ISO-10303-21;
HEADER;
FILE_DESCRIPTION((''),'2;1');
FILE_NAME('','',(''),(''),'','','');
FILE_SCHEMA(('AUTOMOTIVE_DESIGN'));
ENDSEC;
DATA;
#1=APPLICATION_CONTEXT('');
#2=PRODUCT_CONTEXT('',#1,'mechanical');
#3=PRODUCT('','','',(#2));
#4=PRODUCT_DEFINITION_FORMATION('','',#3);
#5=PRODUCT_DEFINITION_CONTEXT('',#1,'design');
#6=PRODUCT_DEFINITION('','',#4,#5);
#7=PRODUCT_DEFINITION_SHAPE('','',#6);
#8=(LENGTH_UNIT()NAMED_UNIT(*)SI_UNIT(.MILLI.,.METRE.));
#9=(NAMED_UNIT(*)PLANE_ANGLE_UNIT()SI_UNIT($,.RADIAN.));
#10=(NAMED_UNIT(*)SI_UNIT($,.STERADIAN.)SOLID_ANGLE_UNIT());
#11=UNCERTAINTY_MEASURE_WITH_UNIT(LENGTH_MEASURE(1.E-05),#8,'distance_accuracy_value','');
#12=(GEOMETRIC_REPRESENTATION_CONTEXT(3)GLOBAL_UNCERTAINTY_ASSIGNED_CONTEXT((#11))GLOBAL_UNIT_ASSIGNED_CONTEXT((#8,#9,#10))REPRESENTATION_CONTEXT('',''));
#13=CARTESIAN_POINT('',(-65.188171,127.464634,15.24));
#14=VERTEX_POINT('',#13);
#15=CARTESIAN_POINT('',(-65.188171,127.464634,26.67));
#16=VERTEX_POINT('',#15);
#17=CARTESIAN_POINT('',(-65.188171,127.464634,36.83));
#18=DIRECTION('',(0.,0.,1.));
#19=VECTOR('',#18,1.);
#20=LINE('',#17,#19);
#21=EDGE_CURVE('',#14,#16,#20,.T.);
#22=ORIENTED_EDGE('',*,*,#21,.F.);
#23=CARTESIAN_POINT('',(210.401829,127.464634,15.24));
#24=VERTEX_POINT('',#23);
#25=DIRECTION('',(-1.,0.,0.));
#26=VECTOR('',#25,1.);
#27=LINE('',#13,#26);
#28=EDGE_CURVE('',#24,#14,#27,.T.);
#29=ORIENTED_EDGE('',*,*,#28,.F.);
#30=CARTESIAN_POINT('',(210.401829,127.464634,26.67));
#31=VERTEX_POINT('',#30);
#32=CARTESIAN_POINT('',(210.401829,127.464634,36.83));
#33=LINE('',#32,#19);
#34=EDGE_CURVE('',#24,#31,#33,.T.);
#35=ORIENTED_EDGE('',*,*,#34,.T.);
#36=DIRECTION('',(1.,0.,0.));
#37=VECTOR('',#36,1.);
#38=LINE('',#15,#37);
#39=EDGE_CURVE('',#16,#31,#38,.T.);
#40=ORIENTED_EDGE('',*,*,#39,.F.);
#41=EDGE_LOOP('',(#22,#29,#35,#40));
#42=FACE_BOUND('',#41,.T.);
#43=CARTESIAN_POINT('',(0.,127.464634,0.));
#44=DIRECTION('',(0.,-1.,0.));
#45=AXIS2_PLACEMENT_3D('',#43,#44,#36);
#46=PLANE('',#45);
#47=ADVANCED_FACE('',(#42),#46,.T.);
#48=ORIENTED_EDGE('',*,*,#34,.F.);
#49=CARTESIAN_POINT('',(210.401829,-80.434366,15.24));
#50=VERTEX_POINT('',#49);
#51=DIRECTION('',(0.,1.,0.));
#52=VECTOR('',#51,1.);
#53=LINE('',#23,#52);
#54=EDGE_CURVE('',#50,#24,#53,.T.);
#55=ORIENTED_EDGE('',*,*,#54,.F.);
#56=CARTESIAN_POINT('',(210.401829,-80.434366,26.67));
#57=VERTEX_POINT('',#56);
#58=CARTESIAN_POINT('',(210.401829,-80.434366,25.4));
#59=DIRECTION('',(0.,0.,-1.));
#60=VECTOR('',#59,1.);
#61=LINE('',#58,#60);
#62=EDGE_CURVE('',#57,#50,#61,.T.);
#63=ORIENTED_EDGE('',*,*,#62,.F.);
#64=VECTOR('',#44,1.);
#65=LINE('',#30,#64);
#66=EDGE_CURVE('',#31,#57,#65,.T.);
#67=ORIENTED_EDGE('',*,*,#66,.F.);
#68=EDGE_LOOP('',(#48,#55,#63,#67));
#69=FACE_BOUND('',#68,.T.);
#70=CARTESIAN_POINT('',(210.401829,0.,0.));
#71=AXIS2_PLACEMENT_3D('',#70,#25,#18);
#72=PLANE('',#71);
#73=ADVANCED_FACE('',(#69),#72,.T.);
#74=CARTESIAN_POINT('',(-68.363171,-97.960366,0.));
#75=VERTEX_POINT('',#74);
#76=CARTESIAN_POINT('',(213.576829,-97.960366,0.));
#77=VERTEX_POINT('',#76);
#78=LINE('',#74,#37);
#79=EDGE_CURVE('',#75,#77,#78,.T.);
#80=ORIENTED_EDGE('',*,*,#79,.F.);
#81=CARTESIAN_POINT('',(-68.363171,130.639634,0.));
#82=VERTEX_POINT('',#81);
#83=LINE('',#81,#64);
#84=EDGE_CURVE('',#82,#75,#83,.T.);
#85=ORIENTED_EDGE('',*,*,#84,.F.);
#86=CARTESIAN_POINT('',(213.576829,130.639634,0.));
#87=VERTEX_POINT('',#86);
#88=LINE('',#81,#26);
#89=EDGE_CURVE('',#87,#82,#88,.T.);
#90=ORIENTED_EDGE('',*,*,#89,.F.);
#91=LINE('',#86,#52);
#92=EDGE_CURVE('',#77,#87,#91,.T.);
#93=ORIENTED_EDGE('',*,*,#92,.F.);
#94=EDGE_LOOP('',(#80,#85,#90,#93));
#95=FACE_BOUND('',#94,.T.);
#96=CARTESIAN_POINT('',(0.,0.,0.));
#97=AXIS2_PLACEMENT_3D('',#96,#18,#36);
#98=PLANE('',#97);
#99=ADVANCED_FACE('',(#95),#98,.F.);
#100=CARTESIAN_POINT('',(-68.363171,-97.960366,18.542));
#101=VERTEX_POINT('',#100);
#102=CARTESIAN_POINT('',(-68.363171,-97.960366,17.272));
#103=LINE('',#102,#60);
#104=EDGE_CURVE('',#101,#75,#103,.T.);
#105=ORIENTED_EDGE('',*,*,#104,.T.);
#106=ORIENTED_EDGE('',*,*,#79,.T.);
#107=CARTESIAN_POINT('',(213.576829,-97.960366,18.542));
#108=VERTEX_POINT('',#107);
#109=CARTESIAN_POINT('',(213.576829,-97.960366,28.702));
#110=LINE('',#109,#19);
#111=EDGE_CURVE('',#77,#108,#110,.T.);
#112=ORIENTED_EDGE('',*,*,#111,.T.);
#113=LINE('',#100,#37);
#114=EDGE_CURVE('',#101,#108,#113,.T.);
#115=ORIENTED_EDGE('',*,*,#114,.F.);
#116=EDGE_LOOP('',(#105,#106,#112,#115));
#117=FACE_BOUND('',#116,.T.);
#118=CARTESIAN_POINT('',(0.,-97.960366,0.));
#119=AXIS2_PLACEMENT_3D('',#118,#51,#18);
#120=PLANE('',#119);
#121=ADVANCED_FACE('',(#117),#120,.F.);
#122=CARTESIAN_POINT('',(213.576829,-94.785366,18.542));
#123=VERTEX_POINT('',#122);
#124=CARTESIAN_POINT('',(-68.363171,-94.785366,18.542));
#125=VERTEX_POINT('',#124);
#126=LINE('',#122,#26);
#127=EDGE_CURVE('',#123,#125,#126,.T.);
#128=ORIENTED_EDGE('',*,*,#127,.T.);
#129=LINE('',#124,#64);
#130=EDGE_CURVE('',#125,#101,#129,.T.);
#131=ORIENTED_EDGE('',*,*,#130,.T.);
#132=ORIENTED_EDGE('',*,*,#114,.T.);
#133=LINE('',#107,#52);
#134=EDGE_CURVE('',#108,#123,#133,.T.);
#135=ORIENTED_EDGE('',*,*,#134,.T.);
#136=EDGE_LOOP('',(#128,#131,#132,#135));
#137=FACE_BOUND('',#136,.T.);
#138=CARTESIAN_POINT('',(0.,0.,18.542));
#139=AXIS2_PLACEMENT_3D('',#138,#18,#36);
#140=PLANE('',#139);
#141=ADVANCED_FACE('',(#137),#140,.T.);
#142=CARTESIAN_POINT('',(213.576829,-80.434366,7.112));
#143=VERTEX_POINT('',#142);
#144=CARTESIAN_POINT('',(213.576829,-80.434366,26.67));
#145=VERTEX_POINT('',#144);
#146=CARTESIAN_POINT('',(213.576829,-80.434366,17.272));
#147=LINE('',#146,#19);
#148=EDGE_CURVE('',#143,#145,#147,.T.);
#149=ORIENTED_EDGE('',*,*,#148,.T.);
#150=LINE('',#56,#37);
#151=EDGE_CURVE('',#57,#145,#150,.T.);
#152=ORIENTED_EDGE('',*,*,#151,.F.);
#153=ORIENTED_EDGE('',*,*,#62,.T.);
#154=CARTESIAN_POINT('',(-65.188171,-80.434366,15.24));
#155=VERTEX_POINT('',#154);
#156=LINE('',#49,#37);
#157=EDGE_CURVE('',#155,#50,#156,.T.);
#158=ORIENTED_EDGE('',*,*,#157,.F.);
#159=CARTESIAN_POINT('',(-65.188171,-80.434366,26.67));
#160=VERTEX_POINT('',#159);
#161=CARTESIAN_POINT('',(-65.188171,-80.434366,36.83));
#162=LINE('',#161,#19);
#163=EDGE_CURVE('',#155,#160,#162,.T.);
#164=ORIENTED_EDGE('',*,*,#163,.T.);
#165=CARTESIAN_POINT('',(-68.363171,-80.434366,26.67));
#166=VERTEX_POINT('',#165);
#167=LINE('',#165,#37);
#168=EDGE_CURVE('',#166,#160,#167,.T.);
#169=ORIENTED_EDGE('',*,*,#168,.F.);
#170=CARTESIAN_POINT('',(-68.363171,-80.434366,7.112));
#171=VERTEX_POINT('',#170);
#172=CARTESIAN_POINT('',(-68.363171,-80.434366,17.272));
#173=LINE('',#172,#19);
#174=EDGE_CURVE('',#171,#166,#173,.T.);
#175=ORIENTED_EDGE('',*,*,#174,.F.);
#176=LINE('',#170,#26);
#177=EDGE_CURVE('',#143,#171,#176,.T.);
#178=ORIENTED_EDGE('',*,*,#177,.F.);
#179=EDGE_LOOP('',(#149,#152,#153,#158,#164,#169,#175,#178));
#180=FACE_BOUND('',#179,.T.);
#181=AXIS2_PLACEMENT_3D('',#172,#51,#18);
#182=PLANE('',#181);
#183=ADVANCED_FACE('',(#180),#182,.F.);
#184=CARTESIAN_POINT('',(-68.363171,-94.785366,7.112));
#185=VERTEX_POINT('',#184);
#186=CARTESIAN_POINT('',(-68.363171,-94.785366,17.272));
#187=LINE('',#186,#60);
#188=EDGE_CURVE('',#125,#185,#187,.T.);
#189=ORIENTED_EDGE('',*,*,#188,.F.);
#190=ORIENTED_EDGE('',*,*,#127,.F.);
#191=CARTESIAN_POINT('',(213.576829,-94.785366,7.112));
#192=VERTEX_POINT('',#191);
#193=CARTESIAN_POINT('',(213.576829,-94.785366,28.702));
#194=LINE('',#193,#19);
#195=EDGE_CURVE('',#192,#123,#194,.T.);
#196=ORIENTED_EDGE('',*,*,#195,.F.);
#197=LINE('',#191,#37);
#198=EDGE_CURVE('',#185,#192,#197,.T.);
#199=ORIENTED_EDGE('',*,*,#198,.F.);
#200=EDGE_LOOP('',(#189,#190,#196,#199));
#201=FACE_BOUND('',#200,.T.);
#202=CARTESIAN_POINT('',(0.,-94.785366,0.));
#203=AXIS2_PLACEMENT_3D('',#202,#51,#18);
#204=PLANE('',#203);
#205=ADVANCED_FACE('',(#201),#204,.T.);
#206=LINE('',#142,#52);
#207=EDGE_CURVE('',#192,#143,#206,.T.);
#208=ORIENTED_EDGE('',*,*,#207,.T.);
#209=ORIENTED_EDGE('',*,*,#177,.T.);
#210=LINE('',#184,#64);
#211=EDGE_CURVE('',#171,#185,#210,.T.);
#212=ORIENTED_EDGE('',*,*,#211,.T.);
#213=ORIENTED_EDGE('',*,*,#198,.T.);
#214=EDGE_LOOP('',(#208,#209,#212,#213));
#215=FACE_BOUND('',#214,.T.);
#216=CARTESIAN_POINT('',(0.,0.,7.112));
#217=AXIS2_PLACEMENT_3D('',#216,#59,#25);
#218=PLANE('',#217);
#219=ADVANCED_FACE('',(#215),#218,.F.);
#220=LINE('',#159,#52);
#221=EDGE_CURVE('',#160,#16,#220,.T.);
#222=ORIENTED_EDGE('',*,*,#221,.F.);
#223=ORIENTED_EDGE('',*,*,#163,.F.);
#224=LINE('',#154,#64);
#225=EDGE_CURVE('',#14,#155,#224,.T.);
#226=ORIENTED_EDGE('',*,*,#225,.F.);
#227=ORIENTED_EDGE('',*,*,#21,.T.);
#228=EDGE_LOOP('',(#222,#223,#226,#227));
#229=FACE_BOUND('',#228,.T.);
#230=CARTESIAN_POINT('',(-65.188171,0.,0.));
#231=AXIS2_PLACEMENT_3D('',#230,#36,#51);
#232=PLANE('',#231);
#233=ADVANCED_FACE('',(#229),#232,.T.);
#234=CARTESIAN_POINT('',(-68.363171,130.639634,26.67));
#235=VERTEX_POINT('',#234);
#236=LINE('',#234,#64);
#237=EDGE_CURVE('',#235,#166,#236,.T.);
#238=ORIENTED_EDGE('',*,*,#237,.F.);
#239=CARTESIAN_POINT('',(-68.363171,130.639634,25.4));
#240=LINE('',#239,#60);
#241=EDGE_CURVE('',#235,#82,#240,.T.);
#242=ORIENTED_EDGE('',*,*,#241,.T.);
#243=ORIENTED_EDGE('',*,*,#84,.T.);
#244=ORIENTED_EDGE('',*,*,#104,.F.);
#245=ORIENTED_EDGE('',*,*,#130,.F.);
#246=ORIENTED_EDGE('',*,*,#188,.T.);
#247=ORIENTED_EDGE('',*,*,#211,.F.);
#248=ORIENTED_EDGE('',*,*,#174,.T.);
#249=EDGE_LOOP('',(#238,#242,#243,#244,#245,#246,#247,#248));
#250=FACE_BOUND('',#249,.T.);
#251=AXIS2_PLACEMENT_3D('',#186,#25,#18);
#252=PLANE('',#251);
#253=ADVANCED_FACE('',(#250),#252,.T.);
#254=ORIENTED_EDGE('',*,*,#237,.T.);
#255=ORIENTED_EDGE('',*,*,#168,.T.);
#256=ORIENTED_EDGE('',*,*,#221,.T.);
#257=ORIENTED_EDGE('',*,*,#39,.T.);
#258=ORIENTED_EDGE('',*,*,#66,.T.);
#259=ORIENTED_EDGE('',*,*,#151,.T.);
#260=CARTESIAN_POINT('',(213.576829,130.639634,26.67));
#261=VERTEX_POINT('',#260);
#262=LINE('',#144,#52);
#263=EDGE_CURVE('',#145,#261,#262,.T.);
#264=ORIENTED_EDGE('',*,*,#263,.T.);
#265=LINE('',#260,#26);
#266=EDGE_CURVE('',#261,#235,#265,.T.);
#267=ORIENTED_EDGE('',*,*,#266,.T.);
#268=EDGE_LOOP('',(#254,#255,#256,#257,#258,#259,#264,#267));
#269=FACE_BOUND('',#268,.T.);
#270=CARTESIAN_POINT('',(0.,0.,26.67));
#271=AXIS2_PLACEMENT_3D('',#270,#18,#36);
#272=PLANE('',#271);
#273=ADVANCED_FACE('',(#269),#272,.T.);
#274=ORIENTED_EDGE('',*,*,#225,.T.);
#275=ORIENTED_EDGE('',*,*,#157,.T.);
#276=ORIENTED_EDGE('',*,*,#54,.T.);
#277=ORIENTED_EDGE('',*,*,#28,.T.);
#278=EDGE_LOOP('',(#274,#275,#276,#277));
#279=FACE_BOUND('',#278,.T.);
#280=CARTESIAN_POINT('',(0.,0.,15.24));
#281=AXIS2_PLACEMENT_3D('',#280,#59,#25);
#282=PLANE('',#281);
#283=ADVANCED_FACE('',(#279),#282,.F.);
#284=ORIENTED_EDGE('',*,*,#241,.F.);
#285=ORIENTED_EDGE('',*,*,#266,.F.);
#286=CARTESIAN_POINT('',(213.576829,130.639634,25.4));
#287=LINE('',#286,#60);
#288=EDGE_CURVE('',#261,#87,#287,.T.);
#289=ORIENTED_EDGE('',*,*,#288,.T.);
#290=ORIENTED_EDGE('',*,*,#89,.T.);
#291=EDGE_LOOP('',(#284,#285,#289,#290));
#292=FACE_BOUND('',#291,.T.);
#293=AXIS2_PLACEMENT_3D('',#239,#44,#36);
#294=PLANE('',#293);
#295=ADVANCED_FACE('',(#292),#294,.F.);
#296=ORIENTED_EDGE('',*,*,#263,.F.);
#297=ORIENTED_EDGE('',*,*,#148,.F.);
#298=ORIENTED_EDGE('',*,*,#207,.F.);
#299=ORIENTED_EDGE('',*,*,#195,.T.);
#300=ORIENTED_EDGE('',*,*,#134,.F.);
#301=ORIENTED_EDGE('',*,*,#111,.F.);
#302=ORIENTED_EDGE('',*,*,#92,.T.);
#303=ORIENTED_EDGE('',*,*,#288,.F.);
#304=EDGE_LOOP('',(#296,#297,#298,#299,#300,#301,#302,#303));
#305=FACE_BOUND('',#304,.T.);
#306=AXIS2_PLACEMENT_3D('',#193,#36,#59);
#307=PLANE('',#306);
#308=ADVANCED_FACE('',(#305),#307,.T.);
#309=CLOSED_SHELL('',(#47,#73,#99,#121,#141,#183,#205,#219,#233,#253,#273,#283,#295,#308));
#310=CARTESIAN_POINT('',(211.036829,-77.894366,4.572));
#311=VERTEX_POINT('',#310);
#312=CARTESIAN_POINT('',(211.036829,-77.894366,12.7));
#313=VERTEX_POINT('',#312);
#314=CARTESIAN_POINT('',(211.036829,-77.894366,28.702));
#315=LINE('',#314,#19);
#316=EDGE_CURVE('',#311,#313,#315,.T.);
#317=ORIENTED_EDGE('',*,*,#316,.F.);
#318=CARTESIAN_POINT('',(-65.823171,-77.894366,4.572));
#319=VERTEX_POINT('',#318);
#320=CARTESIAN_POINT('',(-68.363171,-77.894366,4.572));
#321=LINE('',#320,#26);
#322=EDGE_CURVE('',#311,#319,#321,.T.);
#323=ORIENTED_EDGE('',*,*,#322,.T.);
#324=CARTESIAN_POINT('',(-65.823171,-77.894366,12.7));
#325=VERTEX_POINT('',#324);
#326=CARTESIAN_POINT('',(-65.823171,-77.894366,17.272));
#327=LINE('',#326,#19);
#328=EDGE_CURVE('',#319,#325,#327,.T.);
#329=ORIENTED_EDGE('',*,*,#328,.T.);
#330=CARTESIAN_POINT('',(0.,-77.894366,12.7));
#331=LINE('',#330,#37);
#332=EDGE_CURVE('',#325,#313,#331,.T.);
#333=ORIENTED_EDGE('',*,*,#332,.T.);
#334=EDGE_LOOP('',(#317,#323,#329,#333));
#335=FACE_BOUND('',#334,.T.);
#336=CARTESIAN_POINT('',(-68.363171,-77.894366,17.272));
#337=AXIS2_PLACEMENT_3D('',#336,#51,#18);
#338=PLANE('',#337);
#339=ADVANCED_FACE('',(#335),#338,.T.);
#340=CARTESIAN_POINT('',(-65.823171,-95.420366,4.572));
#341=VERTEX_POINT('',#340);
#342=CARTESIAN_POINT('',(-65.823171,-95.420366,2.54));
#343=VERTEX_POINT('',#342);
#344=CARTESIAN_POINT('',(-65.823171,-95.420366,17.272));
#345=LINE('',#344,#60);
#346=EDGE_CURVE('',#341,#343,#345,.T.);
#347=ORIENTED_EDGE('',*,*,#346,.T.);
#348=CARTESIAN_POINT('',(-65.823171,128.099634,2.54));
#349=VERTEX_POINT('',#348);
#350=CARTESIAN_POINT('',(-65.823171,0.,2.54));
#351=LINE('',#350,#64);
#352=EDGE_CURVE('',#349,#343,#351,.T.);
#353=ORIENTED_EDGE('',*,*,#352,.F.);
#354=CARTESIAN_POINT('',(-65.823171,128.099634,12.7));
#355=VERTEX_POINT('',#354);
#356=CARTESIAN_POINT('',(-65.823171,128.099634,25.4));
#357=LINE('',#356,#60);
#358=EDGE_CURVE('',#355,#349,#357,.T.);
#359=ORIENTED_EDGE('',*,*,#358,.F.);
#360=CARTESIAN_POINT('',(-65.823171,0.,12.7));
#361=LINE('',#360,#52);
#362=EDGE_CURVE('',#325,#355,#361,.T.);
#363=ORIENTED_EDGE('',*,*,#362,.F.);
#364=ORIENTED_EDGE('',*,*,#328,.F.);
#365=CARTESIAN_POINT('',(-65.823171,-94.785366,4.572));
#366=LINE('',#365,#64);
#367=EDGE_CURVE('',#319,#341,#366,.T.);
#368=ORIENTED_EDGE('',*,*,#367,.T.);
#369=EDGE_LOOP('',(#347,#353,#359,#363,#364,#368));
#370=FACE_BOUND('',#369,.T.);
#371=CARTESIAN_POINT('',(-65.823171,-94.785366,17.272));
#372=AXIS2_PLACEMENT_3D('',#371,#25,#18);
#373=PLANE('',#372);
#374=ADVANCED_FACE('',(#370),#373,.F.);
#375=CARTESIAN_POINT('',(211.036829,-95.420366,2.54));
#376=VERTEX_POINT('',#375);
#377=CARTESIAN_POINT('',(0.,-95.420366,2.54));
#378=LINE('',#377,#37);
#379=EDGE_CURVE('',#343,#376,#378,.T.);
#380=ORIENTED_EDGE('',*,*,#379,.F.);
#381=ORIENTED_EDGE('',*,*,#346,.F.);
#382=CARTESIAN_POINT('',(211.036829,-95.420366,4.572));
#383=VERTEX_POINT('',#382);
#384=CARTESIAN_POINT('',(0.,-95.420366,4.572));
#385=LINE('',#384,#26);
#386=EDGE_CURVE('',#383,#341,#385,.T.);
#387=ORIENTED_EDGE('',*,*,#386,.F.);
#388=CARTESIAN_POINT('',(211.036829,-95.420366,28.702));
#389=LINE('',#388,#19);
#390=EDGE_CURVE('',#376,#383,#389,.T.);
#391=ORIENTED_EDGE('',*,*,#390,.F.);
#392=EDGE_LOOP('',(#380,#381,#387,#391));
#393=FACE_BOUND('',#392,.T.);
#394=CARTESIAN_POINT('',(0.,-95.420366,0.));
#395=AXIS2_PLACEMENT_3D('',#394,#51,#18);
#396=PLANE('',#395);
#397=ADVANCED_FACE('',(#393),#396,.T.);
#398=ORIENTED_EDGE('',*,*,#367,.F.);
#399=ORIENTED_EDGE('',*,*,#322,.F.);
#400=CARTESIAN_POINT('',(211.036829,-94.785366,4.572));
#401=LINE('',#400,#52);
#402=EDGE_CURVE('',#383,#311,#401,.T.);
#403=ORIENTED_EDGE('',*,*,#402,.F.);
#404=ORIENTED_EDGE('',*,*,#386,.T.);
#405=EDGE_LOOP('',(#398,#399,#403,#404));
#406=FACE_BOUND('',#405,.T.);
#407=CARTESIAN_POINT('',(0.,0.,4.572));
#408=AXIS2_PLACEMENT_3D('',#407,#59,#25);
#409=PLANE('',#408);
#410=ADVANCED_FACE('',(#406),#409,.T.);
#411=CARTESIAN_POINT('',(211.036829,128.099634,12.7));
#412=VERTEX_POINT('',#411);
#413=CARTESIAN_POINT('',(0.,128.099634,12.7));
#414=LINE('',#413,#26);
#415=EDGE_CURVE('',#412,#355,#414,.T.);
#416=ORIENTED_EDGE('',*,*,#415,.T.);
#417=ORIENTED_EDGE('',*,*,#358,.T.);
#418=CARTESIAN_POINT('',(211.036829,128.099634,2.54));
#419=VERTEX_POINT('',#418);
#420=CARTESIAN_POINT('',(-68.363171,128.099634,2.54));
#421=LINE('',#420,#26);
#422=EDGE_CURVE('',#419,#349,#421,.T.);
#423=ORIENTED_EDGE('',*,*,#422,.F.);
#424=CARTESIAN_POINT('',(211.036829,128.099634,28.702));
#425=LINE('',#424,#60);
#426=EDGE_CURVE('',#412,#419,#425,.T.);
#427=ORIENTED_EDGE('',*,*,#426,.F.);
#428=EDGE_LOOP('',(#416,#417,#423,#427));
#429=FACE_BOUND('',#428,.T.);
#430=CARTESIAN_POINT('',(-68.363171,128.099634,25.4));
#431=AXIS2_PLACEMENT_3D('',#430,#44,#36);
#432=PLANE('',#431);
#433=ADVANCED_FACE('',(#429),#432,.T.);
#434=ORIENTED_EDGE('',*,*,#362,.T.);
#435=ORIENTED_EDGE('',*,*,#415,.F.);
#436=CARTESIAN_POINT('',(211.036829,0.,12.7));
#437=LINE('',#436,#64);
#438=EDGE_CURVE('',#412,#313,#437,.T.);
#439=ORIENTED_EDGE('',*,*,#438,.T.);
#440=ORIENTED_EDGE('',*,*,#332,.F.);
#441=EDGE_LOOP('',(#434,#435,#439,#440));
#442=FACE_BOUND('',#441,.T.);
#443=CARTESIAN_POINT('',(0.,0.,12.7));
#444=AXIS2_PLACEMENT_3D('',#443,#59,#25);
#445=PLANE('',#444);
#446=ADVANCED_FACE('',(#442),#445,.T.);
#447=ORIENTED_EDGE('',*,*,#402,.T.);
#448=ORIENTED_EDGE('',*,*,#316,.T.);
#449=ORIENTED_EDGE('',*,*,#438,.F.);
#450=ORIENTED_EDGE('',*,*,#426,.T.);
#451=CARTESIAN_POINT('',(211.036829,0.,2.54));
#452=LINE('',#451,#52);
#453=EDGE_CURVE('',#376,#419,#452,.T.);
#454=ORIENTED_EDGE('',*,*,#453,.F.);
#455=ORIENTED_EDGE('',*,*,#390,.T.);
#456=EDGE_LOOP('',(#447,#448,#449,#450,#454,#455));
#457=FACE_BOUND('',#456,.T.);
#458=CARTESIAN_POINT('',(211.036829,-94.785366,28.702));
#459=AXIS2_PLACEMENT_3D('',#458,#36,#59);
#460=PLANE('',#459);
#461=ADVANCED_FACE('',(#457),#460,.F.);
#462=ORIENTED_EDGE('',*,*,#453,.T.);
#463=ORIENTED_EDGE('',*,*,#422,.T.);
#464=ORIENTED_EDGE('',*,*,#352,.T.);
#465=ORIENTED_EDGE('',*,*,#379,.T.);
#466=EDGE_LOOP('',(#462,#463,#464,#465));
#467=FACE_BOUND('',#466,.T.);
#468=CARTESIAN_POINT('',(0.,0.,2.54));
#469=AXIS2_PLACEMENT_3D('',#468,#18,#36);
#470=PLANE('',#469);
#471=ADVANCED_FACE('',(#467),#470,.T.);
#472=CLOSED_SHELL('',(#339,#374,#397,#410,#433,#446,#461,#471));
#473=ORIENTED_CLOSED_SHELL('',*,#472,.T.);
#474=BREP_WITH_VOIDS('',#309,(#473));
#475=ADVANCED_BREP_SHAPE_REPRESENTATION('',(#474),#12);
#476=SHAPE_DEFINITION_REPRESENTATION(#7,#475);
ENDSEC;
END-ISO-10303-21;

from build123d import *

# Parameters (mm, degrees)
SKETCH1_W            = 281.94
SKETCH1_H            = 228.6
BOSS_EXTRUDE2_DEPTH  = 25.4
SKETCH3_W            = 281.94
SKETCH3_H            = 17.526
CUT_EXTRUDE1_DEPTH   = 8.128
SKETCH4_W            = 11.43
SKETCH4_H            = 211.074
BOSS_EXTRUDE4_DEPTH  = 3.175
SKETCH5_W            = 278.765
SKETCH5_H            = 11.43
BOSS_EXTRUDE9_DEPTH  = 3.175
SKETCH9_W            = 11.43
SKETCH9_H            = 207.899
BOSS_EXTRUDE10_DEPTH = 3.175
SKETCH8_W            = 281.94
SKETCH8_H            = 11.43
BOSS_EXTRUDE11_DEPTH = 3.175
SKETCH10_W           = 281.94
SKETCH10_H           = 14.351
CUT_EXTRUDE2_DEPTH   = 10.16
SKETCH11_W           = 275.59
SKETCH11_H           = 207.899
CUT_EXTRUDE3_DEPTH   = 10.16
CUT_EXTRUDE4_DEPTH   = 10.16
SKETCH13_W           = 281.94
SKETCH13_H           = 3.175
CUT_EXTRUDE5_DEPTH   = 10.16
SHELL4_START         = -65.823170732
SHELL4_DEPTH         = 276.86


# Read off the part's stored shape, not the designer's step: Shell4
with BuildPart() as part:
    # Sketch1 → Boss-Extrude2 (new body)
    with BuildSketch(Plane.XY):
        with Locations((72.606829268, 16.339634146)):
            Rectangle(SKETCH1_W, SKETCH1_H)
    extrude(amount=BOSS_EXTRUDE2_DEPTH)

    # Sketch3 → Cut-Extrude1 (cut)
    with BuildSketch(Plane.XY.offset(25.4)):
        with Locations((72.606829268, -89.197365854)):
            Rectangle(SKETCH3_W, SKETCH3_H)
    extrude(amount=-CUT_EXTRUDE1_DEPTH, mode=Mode.SUBTRACT)



with BuildPart() as body_2:
    # Sketch4 → Boss-Extrude4 (new body)
    with BuildSketch(Plane.ZY.offset(68.363170732)):
        with Locations((31.115, 25.102634146)):
            Rectangle(SKETCH4_W, SKETCH4_H)
    extrude(amount=-BOSS_EXTRUDE4_DEPTH)


with BuildPart() as part_1:
    add(part.part)

    add(body_2.part)  # Boss-Extrude9 merges body 2
    # Sketch5 → Boss-Extrude9 (add)
    with BuildSketch(Plane(origin=(0, 130.639634146, 0), x_dir=(1, 0, 0), z_dir=(0, 1, 0))):
        with Locations((74.194329268, -31.115)):
            Rectangle(SKETCH5_W, SKETCH5_H)
    extrude(amount=-BOSS_EXTRUDE9_DEPTH)

    # Sketch9 → Boss-Extrude10 (add)
    with BuildSketch(Plane(origin=(213.576829268, 0, 0), x_dir=(0, 0, -1), z_dir=(1, 0, 0))):
        with Locations((-31.115, 23.515134146)):
            Rectangle(SKETCH9_W, SKETCH9_H)
    extrude(amount=-BOSS_EXTRUDE10_DEPTH)


with BuildPart() as body_2_2:
    # Sketch8 → Boss-Extrude11 (new body)
    with BuildSketch(Plane.XZ.offset(97.960365854)):
        with Locations((72.606829268, 22.987)):
            Rectangle(SKETCH8_W, SKETCH8_H)
    extrude(amount=-BOSS_EXTRUDE11_DEPTH)

    # Combine1: union part
    add(part_1.part)

    # Sketch10 → Cut-Extrude2 (cut)
    with BuildSketch(Plane.XY.offset(17.272)):
        with Locations((72.606829268, -87.609865854)):
            Rectangle(SKETCH10_W, SKETCH10_H)
    extrude(amount=-CUT_EXTRUDE2_DEPTH, mode=Mode.SUBTRACT)

    # Sketch11 → Cut-Extrude3 (cut)
    with BuildSketch(Plane.XY.offset(25.4)):
        with Locations((72.606829268, 23.515134146)):
            Rectangle(SKETCH11_W, SKETCH11_H)
    extrude(amount=-CUT_EXTRUDE3_DEPTH, mode=Mode.SUBTRACT)

    # Sketch12 → Cut-Extrude4 (cut)
    with BuildSketch(Plane.XY.offset(36.83)):
        Polygon((-68.363170732, -80.434365854), (-65.188170732, -80.434365854), (-65.188170732, 127.464634146), (210.401829268, 127.464634146), (210.401829268, -80.434365854), (213.576829268, -80.434365854), (213.576829268, 130.639634146), (-68.363170732, 130.639634146), align=None)
    extrude(amount=-CUT_EXTRUDE4_DEPTH, mode=Mode.SUBTRACT)

    # Sketch13 → Cut-Extrude5 (cut)
    with BuildSketch(Plane.XY.offset(28.702)):
        with Locations((72.606829268, -96.372865854)):
            Rectangle(SKETCH13_W, SKETCH13_H)
    extrude(amount=-CUT_EXTRUDE5_DEPTH, mode=Mode.SUBTRACT)

    # Shell4 outline → Shell4 (cut)
    with BuildSketch(Plane.YZ.offset(SHELL4_START)):
        Polygon((-95.420365854, 4.572), (-95.420365854, 2.54), (128.099634146, 2.54), (128.099634146, 12.7), (-77.894365854, 12.7), (-77.894365854, 4.572), align=None)
    extrude(amount=SHELL4_DEPTH, mode=Mode.SUBTRACT)


solid = body_2_2.part
